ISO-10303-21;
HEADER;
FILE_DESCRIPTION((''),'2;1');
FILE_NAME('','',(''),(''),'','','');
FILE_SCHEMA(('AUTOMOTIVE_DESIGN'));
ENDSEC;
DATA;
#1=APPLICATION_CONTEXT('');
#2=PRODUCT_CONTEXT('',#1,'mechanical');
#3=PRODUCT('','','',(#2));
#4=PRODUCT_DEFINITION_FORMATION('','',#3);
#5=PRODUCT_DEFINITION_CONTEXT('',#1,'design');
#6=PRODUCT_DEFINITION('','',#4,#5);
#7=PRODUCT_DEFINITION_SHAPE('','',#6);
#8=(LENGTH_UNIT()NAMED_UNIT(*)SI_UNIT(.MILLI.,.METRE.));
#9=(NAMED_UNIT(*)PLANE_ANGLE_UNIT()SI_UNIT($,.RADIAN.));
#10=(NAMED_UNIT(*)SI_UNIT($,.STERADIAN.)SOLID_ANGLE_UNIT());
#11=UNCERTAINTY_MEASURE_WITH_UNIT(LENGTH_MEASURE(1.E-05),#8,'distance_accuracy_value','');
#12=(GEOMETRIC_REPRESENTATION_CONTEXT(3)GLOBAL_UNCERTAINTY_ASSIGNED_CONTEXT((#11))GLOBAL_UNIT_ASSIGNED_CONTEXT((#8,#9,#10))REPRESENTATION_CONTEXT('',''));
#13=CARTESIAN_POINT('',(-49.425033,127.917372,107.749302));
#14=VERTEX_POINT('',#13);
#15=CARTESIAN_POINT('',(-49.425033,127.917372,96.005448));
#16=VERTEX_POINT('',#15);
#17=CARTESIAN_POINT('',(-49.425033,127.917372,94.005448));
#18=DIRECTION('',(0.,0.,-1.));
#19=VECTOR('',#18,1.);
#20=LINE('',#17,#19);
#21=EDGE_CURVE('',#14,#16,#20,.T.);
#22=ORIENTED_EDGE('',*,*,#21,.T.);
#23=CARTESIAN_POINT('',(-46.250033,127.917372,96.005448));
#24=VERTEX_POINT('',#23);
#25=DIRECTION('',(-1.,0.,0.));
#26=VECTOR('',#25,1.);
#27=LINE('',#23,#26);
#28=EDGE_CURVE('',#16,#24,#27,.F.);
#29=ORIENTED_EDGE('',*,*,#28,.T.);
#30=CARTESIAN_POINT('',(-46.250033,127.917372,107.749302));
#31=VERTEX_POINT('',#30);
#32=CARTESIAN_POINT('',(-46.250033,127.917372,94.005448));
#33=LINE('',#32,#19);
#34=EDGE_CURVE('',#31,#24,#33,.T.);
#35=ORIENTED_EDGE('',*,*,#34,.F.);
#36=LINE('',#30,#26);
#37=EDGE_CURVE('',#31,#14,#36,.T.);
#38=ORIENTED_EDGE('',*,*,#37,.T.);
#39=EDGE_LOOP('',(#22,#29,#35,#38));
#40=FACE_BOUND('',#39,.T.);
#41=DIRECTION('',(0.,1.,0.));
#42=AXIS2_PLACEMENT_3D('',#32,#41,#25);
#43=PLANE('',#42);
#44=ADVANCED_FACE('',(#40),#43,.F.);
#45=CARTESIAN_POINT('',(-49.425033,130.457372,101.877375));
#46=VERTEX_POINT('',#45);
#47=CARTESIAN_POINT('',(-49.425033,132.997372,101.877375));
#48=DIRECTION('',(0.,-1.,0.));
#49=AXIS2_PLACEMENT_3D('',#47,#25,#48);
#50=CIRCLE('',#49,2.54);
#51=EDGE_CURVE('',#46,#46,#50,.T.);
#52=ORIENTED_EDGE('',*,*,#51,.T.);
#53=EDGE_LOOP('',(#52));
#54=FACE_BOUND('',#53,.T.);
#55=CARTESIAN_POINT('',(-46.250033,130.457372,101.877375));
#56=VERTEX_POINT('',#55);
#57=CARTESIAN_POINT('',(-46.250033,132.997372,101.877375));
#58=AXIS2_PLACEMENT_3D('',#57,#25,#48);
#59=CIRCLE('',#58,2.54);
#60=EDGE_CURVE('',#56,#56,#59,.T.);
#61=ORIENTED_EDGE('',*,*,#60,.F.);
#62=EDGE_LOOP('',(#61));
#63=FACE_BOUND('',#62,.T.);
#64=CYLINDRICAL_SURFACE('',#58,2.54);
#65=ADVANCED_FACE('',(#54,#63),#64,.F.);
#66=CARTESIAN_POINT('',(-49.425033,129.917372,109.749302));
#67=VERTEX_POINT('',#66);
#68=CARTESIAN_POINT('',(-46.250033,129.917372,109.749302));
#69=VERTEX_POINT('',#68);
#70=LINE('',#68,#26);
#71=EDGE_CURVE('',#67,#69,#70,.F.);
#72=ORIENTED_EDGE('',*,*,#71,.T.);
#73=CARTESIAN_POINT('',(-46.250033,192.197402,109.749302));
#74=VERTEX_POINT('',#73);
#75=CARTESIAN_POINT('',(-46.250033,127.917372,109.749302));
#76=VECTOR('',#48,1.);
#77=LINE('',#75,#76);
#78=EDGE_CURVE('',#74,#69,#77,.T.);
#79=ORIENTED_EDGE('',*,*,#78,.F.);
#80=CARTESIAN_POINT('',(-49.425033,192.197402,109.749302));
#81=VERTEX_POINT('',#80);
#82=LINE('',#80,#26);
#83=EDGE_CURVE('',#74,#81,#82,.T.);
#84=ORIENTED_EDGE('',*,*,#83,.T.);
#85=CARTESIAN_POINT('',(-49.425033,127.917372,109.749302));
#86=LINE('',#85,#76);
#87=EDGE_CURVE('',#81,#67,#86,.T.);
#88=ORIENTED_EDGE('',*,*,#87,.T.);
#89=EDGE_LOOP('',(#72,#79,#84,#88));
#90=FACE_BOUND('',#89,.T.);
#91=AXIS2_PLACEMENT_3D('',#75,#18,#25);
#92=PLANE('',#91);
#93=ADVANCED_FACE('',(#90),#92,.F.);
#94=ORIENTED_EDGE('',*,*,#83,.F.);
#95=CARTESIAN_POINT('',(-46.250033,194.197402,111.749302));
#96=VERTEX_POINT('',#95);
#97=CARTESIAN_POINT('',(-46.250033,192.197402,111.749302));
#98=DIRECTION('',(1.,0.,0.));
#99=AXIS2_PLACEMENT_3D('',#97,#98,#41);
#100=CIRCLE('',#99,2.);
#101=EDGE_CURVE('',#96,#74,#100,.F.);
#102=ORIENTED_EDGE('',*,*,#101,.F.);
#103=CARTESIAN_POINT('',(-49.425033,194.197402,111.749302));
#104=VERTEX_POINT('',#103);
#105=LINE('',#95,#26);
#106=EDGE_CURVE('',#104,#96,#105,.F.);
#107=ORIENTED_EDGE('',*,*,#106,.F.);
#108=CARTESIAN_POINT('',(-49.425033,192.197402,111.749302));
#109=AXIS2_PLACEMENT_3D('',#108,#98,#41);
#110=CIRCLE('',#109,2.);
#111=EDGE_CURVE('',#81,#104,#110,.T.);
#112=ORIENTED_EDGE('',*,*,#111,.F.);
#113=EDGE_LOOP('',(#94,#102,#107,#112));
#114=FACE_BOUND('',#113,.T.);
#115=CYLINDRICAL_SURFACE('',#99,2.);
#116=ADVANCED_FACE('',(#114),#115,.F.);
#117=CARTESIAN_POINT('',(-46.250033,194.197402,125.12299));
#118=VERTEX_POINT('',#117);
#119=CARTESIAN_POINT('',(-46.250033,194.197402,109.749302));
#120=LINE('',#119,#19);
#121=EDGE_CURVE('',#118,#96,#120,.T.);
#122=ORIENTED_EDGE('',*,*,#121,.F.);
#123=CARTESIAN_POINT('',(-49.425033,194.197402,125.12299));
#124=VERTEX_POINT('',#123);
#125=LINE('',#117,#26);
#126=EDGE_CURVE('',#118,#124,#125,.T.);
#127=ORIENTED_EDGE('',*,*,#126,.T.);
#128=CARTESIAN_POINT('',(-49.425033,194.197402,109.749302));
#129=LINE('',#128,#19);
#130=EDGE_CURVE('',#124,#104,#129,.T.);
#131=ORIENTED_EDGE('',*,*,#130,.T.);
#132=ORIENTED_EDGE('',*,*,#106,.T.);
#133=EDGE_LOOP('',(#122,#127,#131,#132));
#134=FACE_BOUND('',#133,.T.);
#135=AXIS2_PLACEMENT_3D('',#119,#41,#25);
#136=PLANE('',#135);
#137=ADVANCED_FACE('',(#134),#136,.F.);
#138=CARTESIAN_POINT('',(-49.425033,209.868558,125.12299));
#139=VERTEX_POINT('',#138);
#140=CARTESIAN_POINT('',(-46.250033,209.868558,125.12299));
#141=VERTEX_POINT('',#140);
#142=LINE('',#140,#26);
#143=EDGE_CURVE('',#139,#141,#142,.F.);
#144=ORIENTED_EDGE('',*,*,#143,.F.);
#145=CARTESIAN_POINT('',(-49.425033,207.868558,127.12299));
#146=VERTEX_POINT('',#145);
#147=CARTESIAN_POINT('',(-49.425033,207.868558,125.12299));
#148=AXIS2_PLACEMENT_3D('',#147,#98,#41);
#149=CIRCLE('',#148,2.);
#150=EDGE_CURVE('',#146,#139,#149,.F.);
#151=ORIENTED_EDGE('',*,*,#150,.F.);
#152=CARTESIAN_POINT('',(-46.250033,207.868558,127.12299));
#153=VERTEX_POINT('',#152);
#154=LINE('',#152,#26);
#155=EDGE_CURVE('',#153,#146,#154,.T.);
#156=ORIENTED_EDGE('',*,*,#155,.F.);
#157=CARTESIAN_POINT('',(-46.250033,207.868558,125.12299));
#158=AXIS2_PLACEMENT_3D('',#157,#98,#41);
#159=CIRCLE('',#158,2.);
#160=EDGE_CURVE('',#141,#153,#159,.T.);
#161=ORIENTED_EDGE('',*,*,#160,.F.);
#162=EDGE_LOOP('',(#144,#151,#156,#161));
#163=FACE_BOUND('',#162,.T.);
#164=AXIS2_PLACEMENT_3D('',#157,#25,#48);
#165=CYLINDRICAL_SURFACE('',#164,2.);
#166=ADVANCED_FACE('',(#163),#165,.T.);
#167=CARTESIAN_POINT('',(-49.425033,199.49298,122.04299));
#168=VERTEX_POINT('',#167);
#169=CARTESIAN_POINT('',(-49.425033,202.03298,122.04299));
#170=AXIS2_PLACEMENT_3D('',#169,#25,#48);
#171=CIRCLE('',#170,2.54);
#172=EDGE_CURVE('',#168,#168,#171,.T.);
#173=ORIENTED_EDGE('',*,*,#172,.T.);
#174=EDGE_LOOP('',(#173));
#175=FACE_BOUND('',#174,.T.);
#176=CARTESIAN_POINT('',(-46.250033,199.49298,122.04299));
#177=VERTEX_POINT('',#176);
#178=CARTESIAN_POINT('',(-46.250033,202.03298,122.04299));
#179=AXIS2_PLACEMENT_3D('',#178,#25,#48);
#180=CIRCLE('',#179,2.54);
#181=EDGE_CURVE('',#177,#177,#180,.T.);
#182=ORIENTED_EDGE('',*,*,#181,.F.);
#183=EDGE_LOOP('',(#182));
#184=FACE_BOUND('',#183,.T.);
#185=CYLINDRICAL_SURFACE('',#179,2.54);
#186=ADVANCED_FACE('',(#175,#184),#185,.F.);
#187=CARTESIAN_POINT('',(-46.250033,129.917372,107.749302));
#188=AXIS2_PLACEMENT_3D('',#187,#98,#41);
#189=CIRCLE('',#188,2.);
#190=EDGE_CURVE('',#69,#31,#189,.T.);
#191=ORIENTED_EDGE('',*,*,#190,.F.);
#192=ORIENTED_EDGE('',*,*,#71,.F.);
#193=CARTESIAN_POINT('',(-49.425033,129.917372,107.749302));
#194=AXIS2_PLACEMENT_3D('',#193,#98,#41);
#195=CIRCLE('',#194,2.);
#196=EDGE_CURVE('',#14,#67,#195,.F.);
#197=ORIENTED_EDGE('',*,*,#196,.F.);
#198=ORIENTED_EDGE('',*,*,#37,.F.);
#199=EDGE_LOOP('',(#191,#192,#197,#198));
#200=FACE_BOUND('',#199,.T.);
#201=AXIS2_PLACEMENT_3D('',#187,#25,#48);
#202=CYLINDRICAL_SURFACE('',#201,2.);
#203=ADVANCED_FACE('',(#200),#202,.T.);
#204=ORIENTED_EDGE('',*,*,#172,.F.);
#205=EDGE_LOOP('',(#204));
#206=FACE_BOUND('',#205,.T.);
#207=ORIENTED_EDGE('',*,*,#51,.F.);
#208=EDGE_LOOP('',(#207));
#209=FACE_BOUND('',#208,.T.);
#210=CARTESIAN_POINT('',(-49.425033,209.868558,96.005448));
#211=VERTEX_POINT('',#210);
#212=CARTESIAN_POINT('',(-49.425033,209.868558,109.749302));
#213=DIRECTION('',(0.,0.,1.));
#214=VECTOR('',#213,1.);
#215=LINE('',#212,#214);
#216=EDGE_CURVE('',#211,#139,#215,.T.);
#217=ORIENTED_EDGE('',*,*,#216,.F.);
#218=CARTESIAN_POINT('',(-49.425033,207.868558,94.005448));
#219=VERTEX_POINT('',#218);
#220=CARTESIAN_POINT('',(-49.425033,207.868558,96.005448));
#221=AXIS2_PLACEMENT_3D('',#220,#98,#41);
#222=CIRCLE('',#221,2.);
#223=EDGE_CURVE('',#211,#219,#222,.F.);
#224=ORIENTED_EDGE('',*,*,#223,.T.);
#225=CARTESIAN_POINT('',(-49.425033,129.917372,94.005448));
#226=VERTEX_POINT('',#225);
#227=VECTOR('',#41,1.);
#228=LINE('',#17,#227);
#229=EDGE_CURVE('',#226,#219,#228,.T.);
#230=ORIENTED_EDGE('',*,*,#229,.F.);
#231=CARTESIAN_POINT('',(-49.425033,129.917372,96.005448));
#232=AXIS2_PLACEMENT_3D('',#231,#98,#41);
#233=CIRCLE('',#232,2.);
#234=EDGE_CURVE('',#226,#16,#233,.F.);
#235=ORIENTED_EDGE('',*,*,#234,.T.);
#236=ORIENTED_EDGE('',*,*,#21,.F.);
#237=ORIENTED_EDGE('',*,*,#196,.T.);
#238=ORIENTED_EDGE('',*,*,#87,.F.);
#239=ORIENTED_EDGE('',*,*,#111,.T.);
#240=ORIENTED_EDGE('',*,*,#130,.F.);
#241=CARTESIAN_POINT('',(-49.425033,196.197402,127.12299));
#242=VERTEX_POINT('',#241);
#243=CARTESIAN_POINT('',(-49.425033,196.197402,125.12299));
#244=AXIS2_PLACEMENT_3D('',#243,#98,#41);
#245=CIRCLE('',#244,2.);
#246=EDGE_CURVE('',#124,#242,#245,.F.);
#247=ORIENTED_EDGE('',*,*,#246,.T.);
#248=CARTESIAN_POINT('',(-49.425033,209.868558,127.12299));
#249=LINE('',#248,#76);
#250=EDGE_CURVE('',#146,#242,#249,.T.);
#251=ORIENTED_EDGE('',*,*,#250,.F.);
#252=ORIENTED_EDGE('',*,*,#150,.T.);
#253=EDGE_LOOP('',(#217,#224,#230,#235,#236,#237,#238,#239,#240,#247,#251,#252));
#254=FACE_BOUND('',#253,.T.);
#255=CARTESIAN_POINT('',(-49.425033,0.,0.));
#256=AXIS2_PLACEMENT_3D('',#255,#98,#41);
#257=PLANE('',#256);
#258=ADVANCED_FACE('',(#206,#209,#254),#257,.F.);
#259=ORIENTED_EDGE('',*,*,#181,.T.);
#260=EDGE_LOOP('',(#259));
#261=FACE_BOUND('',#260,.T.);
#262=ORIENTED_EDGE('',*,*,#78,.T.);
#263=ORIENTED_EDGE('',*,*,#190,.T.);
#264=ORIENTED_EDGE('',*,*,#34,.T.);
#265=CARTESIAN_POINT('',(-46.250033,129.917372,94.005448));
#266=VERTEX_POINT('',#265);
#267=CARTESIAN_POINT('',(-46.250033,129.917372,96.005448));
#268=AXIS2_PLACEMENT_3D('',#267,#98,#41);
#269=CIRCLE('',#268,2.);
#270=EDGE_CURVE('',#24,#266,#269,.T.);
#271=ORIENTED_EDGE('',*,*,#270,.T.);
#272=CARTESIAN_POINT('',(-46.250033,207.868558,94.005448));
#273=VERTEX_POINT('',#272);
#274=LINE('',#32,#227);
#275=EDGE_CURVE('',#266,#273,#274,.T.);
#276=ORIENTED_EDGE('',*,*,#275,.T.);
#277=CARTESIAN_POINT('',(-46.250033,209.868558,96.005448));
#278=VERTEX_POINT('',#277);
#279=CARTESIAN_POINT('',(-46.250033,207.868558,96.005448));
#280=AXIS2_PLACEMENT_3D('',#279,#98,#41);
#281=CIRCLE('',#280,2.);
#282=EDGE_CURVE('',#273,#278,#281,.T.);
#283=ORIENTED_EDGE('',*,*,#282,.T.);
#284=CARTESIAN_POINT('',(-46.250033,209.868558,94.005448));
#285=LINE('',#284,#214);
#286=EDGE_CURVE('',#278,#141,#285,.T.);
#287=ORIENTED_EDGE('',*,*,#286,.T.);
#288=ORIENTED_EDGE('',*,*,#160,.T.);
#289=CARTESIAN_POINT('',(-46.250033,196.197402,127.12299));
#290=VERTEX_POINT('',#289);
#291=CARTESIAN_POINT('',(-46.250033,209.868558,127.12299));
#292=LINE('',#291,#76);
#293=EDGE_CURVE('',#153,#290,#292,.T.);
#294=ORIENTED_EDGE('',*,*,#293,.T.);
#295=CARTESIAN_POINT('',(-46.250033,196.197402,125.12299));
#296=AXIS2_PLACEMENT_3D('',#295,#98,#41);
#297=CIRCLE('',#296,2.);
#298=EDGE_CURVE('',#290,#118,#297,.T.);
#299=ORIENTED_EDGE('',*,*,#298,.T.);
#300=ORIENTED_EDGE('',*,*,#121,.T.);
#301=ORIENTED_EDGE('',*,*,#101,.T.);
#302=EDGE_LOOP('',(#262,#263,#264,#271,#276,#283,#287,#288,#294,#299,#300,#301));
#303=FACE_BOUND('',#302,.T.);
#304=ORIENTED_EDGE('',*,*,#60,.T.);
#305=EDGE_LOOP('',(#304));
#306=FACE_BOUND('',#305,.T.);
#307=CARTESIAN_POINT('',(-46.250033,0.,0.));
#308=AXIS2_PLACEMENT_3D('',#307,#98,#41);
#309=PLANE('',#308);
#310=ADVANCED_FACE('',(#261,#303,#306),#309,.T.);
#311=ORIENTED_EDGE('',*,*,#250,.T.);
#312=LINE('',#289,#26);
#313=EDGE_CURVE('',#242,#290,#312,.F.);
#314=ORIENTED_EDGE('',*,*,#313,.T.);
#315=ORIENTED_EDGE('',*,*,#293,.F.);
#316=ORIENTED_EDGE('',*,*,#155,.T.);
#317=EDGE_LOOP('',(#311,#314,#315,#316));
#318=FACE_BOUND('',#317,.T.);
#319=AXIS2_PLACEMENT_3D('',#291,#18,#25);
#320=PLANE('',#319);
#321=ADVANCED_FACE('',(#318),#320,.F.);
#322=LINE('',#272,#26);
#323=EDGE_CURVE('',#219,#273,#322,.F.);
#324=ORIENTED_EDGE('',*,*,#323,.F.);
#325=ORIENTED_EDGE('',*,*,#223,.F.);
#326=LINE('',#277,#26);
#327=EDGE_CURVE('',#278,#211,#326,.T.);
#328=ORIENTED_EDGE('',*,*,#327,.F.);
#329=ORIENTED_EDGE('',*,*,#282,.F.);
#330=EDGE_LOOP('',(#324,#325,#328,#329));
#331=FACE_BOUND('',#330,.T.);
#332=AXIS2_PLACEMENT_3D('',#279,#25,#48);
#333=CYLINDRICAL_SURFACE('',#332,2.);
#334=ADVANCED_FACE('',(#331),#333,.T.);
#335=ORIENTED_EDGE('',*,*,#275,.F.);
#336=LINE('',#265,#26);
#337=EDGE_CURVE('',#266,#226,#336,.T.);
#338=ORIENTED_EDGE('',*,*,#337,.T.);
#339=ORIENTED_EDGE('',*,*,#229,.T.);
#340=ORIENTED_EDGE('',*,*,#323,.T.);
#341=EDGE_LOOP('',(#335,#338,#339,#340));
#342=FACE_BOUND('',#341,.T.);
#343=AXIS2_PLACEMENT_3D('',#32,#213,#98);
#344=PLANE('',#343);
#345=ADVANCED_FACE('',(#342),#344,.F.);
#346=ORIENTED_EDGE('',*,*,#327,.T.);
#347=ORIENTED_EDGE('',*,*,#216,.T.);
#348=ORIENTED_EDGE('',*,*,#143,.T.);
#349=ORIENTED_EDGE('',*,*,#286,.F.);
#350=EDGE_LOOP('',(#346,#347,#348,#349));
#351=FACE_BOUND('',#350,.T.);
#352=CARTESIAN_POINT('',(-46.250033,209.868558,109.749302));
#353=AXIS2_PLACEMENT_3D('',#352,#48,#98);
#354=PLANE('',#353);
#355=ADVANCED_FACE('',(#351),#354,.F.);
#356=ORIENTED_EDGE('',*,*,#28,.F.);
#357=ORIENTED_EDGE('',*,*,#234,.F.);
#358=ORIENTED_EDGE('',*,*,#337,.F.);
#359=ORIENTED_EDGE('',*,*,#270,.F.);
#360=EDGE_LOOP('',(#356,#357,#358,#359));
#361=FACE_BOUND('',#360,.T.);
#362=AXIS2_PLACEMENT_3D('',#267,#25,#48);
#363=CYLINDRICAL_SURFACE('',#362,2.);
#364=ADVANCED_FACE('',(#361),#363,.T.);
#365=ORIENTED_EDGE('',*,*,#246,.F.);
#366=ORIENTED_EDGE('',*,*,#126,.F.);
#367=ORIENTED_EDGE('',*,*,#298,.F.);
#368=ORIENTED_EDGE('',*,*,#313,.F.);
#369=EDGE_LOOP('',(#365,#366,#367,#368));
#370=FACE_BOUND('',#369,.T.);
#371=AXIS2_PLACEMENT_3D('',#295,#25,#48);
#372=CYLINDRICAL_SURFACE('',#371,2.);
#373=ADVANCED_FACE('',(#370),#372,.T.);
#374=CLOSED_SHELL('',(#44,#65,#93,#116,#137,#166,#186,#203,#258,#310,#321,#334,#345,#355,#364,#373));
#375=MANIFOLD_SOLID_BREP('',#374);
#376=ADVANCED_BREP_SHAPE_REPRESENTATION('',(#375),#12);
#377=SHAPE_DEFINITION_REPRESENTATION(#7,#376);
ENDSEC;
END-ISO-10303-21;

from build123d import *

# Parameters (mm, degrees)
BASE_FLANGE1_DEPTH = 3.175
SKETCH9_R          = 2.54
CUT_EXTRUDE2_DEPTH = 246.387748173
FILLET1_R          = 2


# Sheet-metal steps are written as plain solids
with BuildPart() as part:
    # Sketch2 → Base-Flange1 (new body)
    with BuildSketch(Plane(origin=(-49.425032983, 0, 0), x_dir=(0, 0, -1), z_dir=(1, 0, 0))):
        Polygon((-94.005448243, 127.917372069), (-109.749301699, 127.917372069), (-109.749301699, 194.197401704), (-127.122990112, 194.197401704), (-127.122990112, 209.868558182), (-109.749301699, 209.868558182), (-94.005448243, 209.868558182), align=None)
    extrude(amount=BASE_FLANGE1_DEPTH)

    # Sketch9 → Cut-Extrude2 (cut, through all)
    with BuildSketch(Plane.ZY.offset(49.425032983)):
        with Locations(Location((122.042990112, 202.032979943, 0), (0, 0, 270))):
            Circle(SKETCH9_R)
        with Locations(Location((101.877374971, 132.997372069, 0), (0, 0, 270))):
            Circle(SKETCH9_R)
    extrude(amount=-CUT_EXTRUDE2_DEPTH, mode=Mode.SUBTRACT)

    # Fillet1
    fillet1_edges = [part.edges().sort_by_distance(p)[0] for p in [
        (-47.837532983, 127.917372069, 94.005448243),
        (-47.837532983, 127.917372069, 109.749301699),
        (-47.837532983, 194.197401704, 109.749301699),
        (-47.837532983, 194.197401704, 127.122990112),
        (-47.837532983, 209.868558182, 127.122990112),
        (-47.837532983, 209.868558182, 94.005448243),
    ]]
    fillet(fillet1_edges, radius=FILLET1_R)


solid = part.part
